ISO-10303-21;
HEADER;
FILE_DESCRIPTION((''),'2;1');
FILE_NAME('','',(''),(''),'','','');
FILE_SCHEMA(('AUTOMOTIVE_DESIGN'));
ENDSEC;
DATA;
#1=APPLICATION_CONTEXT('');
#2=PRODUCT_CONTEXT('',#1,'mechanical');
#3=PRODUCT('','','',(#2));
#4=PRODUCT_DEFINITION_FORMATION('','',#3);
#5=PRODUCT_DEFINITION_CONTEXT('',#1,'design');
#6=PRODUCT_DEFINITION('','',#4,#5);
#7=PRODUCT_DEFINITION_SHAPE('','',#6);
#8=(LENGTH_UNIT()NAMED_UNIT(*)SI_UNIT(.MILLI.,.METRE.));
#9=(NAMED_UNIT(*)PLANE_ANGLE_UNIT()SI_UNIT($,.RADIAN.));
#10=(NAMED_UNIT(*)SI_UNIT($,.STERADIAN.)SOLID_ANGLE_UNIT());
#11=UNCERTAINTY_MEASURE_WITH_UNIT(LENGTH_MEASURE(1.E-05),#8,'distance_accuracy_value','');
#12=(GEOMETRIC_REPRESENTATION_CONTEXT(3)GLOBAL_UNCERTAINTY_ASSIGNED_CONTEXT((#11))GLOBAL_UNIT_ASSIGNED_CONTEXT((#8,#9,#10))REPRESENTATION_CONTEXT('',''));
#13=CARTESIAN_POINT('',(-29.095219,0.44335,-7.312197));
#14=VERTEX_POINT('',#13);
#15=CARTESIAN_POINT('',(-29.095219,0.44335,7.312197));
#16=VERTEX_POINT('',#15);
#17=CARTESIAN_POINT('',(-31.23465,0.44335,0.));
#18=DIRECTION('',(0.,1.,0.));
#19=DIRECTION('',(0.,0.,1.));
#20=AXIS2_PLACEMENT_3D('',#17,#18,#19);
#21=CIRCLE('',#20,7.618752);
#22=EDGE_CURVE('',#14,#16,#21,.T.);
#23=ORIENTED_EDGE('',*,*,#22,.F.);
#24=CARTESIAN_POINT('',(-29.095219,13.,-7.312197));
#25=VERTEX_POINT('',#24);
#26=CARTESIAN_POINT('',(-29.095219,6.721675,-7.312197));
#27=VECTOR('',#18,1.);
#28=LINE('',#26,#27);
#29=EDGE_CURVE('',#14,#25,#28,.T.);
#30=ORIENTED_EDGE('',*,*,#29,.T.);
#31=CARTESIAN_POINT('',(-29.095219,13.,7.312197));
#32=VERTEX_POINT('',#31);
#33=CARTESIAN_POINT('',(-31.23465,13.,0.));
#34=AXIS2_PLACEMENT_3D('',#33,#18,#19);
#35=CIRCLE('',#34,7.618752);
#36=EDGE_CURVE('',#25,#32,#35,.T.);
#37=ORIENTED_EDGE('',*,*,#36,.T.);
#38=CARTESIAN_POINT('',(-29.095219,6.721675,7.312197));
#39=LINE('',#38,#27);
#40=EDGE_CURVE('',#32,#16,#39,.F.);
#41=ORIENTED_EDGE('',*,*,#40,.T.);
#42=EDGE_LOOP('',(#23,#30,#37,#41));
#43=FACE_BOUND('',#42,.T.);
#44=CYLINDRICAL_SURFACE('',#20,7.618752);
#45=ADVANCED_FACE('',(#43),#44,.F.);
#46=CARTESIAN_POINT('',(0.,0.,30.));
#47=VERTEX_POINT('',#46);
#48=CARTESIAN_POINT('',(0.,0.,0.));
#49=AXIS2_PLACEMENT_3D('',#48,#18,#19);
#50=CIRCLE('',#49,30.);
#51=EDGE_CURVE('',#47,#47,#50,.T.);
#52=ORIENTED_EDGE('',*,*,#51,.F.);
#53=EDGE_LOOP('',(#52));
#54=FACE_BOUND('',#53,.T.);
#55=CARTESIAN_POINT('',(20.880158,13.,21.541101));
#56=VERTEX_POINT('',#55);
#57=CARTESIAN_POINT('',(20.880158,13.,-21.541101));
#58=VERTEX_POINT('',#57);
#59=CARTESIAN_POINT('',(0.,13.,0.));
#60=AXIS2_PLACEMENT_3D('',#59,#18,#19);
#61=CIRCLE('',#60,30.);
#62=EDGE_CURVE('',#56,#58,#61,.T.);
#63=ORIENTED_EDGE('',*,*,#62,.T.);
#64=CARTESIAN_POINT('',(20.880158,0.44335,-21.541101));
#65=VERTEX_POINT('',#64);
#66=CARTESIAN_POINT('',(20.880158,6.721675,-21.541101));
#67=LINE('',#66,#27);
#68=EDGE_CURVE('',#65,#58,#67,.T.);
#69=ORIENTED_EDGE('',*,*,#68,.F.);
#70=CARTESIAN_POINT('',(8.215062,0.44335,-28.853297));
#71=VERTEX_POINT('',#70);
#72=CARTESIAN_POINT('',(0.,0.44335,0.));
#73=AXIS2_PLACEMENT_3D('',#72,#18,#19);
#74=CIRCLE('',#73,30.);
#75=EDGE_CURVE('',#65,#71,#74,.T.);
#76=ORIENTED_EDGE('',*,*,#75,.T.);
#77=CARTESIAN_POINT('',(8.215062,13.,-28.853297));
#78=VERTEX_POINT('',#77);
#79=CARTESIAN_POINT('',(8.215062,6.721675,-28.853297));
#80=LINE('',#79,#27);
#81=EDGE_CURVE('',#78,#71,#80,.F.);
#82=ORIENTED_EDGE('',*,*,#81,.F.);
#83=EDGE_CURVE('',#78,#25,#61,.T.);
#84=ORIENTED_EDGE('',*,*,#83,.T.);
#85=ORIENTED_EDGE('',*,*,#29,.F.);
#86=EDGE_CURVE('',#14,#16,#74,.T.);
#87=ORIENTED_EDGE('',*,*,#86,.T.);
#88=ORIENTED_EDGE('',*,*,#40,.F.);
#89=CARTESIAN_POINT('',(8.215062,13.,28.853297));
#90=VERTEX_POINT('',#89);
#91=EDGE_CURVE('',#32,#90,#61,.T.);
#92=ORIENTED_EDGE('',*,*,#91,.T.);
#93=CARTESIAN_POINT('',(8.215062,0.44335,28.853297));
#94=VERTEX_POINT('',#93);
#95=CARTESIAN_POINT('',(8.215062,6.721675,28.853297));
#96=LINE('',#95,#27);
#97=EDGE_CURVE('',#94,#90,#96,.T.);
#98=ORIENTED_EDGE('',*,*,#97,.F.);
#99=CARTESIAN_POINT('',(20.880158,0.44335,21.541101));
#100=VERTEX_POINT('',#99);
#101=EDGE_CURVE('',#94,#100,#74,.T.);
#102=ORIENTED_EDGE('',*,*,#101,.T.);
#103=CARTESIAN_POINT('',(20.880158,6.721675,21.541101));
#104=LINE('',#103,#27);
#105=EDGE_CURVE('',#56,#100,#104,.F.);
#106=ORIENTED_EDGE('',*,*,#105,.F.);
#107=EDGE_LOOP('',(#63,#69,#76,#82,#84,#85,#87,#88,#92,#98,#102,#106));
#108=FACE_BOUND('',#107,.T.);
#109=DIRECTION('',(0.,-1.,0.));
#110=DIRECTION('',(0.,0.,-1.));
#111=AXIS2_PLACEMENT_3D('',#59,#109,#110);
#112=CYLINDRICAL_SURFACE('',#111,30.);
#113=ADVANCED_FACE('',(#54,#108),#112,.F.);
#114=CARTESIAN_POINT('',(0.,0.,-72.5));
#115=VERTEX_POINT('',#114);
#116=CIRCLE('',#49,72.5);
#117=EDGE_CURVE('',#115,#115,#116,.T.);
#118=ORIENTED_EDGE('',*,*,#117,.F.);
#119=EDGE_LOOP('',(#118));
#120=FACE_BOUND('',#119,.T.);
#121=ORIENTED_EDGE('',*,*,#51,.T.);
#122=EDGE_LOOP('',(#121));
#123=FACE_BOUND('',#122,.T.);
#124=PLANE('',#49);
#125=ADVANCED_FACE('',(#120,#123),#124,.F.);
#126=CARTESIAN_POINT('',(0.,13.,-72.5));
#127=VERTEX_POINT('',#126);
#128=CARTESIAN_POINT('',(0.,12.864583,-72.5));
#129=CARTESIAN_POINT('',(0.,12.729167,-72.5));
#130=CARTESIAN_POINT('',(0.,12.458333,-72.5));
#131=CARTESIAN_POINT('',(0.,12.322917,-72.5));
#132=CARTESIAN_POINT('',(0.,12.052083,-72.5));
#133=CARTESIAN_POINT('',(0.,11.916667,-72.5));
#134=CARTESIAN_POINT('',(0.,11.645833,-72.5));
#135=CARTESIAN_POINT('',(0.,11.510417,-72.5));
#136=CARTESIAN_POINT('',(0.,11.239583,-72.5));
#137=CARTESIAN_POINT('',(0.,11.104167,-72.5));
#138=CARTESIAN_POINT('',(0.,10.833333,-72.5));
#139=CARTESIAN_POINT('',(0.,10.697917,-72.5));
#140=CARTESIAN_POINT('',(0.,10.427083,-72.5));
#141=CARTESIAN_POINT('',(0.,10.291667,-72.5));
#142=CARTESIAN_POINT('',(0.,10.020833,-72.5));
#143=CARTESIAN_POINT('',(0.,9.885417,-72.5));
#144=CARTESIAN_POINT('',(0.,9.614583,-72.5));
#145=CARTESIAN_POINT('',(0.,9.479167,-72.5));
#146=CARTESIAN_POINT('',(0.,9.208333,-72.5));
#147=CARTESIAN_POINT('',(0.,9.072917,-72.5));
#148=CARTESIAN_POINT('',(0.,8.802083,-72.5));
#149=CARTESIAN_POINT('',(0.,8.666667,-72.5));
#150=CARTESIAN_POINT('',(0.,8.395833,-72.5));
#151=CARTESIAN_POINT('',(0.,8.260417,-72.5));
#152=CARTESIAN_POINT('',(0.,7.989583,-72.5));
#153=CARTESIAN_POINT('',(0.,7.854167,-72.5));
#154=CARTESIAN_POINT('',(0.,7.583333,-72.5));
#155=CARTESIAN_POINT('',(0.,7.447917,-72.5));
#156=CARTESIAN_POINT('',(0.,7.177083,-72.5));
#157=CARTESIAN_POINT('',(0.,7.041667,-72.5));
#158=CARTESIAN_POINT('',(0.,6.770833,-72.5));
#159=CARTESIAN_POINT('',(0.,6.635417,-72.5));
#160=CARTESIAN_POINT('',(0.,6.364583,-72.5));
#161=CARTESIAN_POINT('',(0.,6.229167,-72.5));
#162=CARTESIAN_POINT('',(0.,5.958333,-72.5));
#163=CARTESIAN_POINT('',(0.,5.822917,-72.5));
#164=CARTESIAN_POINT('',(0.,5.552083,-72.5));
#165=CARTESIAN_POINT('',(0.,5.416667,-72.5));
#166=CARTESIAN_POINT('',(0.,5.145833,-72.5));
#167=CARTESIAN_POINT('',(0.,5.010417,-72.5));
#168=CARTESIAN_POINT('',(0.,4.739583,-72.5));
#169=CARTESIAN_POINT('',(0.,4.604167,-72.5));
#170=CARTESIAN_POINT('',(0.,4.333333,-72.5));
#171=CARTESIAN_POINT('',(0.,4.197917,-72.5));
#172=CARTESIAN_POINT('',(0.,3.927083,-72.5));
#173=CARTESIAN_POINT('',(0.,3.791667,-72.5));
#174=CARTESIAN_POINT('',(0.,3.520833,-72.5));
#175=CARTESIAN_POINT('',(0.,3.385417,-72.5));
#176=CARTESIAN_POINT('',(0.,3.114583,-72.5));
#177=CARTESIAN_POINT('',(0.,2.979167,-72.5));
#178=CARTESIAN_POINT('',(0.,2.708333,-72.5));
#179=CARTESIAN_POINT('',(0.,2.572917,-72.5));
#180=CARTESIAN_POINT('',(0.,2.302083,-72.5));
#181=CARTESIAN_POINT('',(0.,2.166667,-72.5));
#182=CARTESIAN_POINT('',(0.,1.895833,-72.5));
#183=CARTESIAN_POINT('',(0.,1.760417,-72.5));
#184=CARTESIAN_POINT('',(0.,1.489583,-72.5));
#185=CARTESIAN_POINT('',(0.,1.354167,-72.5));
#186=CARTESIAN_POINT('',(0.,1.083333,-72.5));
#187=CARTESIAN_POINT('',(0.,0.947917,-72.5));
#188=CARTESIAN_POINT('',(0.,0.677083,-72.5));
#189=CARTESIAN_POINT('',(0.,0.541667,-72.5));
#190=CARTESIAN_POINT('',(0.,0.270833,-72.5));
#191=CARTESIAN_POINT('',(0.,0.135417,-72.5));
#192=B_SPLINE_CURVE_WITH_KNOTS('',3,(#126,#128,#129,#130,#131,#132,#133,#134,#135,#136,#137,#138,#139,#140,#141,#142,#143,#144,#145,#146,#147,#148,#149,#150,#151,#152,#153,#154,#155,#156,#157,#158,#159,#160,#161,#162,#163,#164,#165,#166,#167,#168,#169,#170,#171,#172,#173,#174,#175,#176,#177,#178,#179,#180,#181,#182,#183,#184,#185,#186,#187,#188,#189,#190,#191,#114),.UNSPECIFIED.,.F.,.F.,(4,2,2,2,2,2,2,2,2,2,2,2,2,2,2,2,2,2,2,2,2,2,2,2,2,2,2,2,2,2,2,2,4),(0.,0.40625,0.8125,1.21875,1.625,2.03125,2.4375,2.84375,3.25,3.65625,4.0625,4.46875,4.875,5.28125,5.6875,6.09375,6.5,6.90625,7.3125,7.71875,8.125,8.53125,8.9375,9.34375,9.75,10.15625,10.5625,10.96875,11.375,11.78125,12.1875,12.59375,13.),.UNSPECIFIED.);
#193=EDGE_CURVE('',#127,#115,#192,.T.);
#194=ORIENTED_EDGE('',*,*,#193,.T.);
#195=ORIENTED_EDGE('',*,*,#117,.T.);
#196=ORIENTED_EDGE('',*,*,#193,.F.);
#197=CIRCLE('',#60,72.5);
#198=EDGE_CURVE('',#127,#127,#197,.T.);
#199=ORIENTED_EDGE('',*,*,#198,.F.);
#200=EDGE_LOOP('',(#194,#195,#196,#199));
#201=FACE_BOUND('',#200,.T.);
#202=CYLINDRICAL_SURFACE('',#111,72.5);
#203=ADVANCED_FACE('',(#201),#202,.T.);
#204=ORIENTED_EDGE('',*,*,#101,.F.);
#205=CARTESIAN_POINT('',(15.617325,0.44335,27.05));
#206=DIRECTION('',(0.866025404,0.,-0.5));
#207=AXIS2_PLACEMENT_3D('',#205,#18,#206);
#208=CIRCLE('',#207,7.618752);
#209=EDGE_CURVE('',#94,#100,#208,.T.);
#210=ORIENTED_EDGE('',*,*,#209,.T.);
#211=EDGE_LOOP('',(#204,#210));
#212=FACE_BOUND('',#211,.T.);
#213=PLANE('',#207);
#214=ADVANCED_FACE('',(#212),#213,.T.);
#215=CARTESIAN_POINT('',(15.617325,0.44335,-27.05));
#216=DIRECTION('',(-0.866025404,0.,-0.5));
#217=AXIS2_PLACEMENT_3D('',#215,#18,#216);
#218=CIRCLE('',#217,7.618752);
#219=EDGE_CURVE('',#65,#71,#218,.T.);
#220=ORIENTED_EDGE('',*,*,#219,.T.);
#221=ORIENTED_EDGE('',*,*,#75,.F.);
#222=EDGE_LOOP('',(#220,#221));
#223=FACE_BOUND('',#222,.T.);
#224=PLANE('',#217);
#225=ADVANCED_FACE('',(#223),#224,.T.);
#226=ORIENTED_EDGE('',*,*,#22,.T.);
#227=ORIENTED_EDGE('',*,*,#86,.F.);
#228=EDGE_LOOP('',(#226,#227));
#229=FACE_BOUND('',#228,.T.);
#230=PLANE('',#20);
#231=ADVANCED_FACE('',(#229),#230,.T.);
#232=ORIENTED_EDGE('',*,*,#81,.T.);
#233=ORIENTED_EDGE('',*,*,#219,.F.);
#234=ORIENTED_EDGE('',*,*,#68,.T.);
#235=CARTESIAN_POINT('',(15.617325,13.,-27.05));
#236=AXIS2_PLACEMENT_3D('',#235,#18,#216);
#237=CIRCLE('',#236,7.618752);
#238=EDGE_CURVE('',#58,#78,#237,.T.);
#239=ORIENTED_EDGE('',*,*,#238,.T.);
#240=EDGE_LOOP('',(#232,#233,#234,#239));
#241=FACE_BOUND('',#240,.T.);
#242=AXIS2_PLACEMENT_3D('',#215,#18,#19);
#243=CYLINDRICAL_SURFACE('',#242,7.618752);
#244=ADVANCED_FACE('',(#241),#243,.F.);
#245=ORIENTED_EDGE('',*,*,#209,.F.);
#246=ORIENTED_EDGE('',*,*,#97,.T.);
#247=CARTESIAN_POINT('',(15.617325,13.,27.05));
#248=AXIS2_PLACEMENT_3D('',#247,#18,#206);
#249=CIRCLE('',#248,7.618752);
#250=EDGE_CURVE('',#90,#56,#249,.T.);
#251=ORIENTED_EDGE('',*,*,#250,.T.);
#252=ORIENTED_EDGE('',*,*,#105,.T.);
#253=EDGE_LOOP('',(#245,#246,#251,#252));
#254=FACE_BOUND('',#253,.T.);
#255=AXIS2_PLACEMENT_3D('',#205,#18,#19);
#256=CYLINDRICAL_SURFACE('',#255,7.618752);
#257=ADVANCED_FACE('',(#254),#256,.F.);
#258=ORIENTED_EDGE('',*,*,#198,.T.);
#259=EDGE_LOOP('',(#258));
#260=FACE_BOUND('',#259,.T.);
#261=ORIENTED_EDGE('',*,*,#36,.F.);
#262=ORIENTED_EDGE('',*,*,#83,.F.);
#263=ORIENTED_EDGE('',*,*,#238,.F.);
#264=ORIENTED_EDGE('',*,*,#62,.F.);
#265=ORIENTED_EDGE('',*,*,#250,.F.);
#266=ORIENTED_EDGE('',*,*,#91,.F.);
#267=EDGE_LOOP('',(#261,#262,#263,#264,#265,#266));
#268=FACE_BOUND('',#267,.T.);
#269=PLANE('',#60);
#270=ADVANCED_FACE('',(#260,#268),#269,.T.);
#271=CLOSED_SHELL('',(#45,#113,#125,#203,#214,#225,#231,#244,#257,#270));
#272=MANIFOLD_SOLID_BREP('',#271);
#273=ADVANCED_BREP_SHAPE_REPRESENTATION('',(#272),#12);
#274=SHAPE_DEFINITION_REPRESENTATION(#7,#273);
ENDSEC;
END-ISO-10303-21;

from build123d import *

# Parameters (mm, degrees)
SKETCH1_R           = 72.5
BOSS_EXTRUDE1_DEPTH = 13
SKETCH2_R           = 30
CUT_EXTRUDE1_DEPTH  = 104.351342517
SKETCH3_R           = 7.618751991
CUT_EXTRUDE2_DEPTH  = 12.556649537
CIRPATTERN1_COUNT   = 3


with BuildPart() as part:
    # Sketch1 → Boss-Extrude1 (new body)
    with BuildSketch(Plane(origin=(0, 0, 0), x_dir=(1, 0, 0), z_dir=(0, 1, 0))):
        Circle(SKETCH1_R)
    extrude(amount=BOSS_EXTRUDE1_DEPTH)

    # Sketch2 → Cut-Extrude1 (cut, through all)
    with BuildSketch(Plane(origin=(0, 0, 0), x_dir=(1, 0, 0), z_dir=(0, 1, 0))):
        Circle(SKETCH2_R)
    extrude(amount=CUT_EXTRUDE1_DEPTH, mode=Mode.SUBTRACT)

    # Sketch3 → Cut-Extrude2 (cut)
    with BuildSketch(Plane(origin=(0, 13, 0), x_dir=(1, 0, 0), z_dir=(0, 1, 0))):
        with Locations((-31.234649967, 0)):
            Circle(SKETCH3_R)
    cut_extrude2 = extrude(amount=-CUT_EXTRUDE2_DEPTH, mode=Mode.SUBTRACT)

    # CirPattern1: Cut-Extrude2 ×3 about axis
    cirpattern1_axis = Axis((0, 0, 0), (0, 1, 0))
    for i in range(1, CIRPATTERN1_COUNT):
        add(cut_extrude2.rotate(cirpattern1_axis, i * 360 / CIRPATTERN1_COUNT), mode=Mode.SUBTRACT)


solid = part.part
